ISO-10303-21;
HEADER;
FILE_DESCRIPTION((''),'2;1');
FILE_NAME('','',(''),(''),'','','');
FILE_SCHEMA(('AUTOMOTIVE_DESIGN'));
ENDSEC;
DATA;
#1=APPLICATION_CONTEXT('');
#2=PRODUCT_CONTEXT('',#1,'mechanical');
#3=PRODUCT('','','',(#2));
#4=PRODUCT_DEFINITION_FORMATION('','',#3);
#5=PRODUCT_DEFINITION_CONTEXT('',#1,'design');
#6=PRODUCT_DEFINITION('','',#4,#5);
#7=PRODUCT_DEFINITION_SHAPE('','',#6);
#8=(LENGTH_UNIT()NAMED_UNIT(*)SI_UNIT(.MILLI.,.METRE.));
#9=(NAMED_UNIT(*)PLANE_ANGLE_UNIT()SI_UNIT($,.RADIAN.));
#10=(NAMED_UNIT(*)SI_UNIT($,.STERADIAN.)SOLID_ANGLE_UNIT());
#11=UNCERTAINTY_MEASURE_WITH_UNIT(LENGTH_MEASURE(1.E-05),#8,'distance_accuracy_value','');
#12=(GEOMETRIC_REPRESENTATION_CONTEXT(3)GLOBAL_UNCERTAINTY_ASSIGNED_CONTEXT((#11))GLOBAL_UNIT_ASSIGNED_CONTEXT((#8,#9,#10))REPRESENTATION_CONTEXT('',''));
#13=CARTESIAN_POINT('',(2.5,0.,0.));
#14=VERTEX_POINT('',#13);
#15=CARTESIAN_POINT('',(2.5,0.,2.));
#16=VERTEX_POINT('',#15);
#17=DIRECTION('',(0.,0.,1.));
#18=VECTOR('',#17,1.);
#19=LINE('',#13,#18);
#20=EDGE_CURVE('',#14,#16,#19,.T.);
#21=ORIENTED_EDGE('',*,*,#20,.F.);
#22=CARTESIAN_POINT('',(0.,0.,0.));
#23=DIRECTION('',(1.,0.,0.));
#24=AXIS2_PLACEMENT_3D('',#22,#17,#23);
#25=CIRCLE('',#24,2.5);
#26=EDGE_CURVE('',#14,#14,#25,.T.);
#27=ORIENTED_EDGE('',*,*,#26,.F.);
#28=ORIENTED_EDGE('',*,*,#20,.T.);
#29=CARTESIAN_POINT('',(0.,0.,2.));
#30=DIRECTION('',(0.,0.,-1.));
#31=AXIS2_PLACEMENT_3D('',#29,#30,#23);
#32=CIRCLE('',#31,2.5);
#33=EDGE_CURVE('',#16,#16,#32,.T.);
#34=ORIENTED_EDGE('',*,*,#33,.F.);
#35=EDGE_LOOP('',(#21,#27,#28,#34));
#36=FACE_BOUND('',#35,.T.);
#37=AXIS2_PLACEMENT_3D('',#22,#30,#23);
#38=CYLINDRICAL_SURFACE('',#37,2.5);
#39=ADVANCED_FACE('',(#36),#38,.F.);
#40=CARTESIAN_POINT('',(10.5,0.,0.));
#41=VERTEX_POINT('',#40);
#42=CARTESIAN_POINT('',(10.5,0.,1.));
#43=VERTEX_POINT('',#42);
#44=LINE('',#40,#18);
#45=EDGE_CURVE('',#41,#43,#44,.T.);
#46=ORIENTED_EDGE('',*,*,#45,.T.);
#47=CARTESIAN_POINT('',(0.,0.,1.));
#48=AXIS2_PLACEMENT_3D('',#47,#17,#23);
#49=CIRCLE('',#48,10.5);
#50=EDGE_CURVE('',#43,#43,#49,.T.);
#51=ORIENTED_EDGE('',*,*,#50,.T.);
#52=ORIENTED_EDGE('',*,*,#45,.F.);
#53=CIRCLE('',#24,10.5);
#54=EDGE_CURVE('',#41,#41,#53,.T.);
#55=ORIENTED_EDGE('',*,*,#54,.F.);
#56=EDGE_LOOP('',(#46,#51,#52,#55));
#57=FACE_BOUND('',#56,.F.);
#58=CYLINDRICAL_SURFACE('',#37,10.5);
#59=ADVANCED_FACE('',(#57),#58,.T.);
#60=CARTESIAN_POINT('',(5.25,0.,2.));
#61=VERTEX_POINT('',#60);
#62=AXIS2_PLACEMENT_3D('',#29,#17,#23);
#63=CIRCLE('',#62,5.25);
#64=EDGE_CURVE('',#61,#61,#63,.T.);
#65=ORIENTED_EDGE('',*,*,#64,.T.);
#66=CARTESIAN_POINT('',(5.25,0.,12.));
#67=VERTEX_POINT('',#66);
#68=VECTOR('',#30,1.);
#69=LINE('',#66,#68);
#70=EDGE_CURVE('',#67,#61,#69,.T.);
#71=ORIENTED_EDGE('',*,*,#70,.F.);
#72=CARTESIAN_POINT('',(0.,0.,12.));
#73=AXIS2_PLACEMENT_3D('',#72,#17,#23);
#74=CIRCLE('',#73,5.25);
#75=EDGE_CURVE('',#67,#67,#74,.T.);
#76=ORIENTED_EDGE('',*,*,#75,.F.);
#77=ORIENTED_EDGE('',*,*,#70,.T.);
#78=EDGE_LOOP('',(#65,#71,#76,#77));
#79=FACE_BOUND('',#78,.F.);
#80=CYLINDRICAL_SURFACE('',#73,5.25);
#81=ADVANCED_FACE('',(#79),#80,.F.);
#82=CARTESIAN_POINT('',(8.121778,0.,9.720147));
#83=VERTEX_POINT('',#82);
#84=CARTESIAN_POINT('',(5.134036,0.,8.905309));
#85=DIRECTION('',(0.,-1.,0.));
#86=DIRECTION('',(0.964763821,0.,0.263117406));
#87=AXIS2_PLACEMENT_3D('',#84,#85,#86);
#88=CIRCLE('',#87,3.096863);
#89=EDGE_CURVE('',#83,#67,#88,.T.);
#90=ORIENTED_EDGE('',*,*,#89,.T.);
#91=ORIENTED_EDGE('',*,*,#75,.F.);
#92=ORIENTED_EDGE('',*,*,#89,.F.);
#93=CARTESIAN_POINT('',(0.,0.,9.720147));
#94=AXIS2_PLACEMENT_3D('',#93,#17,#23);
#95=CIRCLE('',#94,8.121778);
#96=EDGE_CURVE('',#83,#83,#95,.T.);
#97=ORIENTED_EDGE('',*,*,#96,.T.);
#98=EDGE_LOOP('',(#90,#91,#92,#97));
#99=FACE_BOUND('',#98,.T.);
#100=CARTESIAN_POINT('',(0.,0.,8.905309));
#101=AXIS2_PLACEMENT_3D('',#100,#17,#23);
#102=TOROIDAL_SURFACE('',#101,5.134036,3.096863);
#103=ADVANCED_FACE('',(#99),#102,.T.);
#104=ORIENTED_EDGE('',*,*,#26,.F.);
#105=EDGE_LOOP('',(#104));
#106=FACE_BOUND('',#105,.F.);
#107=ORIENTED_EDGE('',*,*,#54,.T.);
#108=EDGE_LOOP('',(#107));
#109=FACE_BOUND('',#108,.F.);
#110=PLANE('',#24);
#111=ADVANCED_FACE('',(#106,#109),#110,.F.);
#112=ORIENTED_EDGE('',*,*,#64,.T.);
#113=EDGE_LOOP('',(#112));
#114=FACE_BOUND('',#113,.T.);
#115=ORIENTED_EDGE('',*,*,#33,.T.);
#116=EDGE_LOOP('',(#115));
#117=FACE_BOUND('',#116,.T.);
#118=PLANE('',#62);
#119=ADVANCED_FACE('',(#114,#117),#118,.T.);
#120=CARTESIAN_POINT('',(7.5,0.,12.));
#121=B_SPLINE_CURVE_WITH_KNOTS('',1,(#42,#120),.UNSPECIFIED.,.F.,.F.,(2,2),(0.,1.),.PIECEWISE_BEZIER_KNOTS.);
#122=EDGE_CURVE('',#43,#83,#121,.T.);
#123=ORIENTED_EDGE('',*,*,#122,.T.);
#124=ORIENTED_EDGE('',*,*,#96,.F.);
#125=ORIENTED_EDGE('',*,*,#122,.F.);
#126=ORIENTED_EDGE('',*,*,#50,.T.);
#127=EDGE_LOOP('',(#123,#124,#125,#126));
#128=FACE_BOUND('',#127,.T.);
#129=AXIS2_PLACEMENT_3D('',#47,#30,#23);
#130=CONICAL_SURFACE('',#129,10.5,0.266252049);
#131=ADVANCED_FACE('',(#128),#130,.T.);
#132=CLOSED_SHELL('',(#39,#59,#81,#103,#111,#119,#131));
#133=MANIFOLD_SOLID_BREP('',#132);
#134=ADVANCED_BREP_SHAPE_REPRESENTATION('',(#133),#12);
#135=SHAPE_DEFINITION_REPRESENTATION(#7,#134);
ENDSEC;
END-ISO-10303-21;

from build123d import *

# Parameters (mm, degrees)
F0_R      = 10.5
F1_DEPTH  = 1
F1_FACE_R = 10.5
F3_R      = 7.5
F5_R      = 2.5
F6_DEPTH  = 12
F7_R      = 5.25
F8_DEPTH  = 10


# Not quite as in the source:
# - a fillet or chamfer that OpenCascade refuses, or shapes differently, is made with other operations: its cross-section is extruded or revolved along the edge and cut away or added


with BuildPart() as f1:
    # F0 (on Top) → F1 (new body)
    with BuildSketch(Plane.XY):
        Circle(F0_R)
    extrude(amount=F1_DEPTH)

    # F1_face (on face) → F4 section 0
    with BuildSketch(Plane.XY.offset(1)):
        Circle(F1_FACE_R)
    # F3 (on offset) → F4 section 1
    with BuildSketch(Plane.XY.offset(12)):
        Circle(F3_R)
    loft()

    # F5 (on Top) → F6 (cut, through all)
    with BuildSketch(Plane.XY):
        Circle(F5_R)
    extrude(amount=F6_DEPTH, mode=Mode.SUBTRACT)

    # F7 (on offset) → F8 (cut)
    with BuildSketch(Plane.XY.offset(12)):
        Circle(F7_R)
    extrude(amount=-F8_DEPTH, mode=Mode.SUBTRACT)

    # F9: fillet of radius 3.0968632265 on 1 edges, made by hand

    # F9_s1 → F9_t2 (revolve, cut)
    with BuildSketch(Plane.XZ):
        with BuildLine():
            ThreePointArc((8.1217780062, 9.7201473108), (7.0595697228, 11.3307742745), (5.25, 12))
            Line((5.25, 12), (7.5, 12))
            Line((7.5, 12), (8.1217780062, 9.7201473108))
        make_face()
    revolve(axis=Axis((0, 0, 12), (0, 0, 1)), mode=Mode.SUBTRACT)


solid = f1.part
